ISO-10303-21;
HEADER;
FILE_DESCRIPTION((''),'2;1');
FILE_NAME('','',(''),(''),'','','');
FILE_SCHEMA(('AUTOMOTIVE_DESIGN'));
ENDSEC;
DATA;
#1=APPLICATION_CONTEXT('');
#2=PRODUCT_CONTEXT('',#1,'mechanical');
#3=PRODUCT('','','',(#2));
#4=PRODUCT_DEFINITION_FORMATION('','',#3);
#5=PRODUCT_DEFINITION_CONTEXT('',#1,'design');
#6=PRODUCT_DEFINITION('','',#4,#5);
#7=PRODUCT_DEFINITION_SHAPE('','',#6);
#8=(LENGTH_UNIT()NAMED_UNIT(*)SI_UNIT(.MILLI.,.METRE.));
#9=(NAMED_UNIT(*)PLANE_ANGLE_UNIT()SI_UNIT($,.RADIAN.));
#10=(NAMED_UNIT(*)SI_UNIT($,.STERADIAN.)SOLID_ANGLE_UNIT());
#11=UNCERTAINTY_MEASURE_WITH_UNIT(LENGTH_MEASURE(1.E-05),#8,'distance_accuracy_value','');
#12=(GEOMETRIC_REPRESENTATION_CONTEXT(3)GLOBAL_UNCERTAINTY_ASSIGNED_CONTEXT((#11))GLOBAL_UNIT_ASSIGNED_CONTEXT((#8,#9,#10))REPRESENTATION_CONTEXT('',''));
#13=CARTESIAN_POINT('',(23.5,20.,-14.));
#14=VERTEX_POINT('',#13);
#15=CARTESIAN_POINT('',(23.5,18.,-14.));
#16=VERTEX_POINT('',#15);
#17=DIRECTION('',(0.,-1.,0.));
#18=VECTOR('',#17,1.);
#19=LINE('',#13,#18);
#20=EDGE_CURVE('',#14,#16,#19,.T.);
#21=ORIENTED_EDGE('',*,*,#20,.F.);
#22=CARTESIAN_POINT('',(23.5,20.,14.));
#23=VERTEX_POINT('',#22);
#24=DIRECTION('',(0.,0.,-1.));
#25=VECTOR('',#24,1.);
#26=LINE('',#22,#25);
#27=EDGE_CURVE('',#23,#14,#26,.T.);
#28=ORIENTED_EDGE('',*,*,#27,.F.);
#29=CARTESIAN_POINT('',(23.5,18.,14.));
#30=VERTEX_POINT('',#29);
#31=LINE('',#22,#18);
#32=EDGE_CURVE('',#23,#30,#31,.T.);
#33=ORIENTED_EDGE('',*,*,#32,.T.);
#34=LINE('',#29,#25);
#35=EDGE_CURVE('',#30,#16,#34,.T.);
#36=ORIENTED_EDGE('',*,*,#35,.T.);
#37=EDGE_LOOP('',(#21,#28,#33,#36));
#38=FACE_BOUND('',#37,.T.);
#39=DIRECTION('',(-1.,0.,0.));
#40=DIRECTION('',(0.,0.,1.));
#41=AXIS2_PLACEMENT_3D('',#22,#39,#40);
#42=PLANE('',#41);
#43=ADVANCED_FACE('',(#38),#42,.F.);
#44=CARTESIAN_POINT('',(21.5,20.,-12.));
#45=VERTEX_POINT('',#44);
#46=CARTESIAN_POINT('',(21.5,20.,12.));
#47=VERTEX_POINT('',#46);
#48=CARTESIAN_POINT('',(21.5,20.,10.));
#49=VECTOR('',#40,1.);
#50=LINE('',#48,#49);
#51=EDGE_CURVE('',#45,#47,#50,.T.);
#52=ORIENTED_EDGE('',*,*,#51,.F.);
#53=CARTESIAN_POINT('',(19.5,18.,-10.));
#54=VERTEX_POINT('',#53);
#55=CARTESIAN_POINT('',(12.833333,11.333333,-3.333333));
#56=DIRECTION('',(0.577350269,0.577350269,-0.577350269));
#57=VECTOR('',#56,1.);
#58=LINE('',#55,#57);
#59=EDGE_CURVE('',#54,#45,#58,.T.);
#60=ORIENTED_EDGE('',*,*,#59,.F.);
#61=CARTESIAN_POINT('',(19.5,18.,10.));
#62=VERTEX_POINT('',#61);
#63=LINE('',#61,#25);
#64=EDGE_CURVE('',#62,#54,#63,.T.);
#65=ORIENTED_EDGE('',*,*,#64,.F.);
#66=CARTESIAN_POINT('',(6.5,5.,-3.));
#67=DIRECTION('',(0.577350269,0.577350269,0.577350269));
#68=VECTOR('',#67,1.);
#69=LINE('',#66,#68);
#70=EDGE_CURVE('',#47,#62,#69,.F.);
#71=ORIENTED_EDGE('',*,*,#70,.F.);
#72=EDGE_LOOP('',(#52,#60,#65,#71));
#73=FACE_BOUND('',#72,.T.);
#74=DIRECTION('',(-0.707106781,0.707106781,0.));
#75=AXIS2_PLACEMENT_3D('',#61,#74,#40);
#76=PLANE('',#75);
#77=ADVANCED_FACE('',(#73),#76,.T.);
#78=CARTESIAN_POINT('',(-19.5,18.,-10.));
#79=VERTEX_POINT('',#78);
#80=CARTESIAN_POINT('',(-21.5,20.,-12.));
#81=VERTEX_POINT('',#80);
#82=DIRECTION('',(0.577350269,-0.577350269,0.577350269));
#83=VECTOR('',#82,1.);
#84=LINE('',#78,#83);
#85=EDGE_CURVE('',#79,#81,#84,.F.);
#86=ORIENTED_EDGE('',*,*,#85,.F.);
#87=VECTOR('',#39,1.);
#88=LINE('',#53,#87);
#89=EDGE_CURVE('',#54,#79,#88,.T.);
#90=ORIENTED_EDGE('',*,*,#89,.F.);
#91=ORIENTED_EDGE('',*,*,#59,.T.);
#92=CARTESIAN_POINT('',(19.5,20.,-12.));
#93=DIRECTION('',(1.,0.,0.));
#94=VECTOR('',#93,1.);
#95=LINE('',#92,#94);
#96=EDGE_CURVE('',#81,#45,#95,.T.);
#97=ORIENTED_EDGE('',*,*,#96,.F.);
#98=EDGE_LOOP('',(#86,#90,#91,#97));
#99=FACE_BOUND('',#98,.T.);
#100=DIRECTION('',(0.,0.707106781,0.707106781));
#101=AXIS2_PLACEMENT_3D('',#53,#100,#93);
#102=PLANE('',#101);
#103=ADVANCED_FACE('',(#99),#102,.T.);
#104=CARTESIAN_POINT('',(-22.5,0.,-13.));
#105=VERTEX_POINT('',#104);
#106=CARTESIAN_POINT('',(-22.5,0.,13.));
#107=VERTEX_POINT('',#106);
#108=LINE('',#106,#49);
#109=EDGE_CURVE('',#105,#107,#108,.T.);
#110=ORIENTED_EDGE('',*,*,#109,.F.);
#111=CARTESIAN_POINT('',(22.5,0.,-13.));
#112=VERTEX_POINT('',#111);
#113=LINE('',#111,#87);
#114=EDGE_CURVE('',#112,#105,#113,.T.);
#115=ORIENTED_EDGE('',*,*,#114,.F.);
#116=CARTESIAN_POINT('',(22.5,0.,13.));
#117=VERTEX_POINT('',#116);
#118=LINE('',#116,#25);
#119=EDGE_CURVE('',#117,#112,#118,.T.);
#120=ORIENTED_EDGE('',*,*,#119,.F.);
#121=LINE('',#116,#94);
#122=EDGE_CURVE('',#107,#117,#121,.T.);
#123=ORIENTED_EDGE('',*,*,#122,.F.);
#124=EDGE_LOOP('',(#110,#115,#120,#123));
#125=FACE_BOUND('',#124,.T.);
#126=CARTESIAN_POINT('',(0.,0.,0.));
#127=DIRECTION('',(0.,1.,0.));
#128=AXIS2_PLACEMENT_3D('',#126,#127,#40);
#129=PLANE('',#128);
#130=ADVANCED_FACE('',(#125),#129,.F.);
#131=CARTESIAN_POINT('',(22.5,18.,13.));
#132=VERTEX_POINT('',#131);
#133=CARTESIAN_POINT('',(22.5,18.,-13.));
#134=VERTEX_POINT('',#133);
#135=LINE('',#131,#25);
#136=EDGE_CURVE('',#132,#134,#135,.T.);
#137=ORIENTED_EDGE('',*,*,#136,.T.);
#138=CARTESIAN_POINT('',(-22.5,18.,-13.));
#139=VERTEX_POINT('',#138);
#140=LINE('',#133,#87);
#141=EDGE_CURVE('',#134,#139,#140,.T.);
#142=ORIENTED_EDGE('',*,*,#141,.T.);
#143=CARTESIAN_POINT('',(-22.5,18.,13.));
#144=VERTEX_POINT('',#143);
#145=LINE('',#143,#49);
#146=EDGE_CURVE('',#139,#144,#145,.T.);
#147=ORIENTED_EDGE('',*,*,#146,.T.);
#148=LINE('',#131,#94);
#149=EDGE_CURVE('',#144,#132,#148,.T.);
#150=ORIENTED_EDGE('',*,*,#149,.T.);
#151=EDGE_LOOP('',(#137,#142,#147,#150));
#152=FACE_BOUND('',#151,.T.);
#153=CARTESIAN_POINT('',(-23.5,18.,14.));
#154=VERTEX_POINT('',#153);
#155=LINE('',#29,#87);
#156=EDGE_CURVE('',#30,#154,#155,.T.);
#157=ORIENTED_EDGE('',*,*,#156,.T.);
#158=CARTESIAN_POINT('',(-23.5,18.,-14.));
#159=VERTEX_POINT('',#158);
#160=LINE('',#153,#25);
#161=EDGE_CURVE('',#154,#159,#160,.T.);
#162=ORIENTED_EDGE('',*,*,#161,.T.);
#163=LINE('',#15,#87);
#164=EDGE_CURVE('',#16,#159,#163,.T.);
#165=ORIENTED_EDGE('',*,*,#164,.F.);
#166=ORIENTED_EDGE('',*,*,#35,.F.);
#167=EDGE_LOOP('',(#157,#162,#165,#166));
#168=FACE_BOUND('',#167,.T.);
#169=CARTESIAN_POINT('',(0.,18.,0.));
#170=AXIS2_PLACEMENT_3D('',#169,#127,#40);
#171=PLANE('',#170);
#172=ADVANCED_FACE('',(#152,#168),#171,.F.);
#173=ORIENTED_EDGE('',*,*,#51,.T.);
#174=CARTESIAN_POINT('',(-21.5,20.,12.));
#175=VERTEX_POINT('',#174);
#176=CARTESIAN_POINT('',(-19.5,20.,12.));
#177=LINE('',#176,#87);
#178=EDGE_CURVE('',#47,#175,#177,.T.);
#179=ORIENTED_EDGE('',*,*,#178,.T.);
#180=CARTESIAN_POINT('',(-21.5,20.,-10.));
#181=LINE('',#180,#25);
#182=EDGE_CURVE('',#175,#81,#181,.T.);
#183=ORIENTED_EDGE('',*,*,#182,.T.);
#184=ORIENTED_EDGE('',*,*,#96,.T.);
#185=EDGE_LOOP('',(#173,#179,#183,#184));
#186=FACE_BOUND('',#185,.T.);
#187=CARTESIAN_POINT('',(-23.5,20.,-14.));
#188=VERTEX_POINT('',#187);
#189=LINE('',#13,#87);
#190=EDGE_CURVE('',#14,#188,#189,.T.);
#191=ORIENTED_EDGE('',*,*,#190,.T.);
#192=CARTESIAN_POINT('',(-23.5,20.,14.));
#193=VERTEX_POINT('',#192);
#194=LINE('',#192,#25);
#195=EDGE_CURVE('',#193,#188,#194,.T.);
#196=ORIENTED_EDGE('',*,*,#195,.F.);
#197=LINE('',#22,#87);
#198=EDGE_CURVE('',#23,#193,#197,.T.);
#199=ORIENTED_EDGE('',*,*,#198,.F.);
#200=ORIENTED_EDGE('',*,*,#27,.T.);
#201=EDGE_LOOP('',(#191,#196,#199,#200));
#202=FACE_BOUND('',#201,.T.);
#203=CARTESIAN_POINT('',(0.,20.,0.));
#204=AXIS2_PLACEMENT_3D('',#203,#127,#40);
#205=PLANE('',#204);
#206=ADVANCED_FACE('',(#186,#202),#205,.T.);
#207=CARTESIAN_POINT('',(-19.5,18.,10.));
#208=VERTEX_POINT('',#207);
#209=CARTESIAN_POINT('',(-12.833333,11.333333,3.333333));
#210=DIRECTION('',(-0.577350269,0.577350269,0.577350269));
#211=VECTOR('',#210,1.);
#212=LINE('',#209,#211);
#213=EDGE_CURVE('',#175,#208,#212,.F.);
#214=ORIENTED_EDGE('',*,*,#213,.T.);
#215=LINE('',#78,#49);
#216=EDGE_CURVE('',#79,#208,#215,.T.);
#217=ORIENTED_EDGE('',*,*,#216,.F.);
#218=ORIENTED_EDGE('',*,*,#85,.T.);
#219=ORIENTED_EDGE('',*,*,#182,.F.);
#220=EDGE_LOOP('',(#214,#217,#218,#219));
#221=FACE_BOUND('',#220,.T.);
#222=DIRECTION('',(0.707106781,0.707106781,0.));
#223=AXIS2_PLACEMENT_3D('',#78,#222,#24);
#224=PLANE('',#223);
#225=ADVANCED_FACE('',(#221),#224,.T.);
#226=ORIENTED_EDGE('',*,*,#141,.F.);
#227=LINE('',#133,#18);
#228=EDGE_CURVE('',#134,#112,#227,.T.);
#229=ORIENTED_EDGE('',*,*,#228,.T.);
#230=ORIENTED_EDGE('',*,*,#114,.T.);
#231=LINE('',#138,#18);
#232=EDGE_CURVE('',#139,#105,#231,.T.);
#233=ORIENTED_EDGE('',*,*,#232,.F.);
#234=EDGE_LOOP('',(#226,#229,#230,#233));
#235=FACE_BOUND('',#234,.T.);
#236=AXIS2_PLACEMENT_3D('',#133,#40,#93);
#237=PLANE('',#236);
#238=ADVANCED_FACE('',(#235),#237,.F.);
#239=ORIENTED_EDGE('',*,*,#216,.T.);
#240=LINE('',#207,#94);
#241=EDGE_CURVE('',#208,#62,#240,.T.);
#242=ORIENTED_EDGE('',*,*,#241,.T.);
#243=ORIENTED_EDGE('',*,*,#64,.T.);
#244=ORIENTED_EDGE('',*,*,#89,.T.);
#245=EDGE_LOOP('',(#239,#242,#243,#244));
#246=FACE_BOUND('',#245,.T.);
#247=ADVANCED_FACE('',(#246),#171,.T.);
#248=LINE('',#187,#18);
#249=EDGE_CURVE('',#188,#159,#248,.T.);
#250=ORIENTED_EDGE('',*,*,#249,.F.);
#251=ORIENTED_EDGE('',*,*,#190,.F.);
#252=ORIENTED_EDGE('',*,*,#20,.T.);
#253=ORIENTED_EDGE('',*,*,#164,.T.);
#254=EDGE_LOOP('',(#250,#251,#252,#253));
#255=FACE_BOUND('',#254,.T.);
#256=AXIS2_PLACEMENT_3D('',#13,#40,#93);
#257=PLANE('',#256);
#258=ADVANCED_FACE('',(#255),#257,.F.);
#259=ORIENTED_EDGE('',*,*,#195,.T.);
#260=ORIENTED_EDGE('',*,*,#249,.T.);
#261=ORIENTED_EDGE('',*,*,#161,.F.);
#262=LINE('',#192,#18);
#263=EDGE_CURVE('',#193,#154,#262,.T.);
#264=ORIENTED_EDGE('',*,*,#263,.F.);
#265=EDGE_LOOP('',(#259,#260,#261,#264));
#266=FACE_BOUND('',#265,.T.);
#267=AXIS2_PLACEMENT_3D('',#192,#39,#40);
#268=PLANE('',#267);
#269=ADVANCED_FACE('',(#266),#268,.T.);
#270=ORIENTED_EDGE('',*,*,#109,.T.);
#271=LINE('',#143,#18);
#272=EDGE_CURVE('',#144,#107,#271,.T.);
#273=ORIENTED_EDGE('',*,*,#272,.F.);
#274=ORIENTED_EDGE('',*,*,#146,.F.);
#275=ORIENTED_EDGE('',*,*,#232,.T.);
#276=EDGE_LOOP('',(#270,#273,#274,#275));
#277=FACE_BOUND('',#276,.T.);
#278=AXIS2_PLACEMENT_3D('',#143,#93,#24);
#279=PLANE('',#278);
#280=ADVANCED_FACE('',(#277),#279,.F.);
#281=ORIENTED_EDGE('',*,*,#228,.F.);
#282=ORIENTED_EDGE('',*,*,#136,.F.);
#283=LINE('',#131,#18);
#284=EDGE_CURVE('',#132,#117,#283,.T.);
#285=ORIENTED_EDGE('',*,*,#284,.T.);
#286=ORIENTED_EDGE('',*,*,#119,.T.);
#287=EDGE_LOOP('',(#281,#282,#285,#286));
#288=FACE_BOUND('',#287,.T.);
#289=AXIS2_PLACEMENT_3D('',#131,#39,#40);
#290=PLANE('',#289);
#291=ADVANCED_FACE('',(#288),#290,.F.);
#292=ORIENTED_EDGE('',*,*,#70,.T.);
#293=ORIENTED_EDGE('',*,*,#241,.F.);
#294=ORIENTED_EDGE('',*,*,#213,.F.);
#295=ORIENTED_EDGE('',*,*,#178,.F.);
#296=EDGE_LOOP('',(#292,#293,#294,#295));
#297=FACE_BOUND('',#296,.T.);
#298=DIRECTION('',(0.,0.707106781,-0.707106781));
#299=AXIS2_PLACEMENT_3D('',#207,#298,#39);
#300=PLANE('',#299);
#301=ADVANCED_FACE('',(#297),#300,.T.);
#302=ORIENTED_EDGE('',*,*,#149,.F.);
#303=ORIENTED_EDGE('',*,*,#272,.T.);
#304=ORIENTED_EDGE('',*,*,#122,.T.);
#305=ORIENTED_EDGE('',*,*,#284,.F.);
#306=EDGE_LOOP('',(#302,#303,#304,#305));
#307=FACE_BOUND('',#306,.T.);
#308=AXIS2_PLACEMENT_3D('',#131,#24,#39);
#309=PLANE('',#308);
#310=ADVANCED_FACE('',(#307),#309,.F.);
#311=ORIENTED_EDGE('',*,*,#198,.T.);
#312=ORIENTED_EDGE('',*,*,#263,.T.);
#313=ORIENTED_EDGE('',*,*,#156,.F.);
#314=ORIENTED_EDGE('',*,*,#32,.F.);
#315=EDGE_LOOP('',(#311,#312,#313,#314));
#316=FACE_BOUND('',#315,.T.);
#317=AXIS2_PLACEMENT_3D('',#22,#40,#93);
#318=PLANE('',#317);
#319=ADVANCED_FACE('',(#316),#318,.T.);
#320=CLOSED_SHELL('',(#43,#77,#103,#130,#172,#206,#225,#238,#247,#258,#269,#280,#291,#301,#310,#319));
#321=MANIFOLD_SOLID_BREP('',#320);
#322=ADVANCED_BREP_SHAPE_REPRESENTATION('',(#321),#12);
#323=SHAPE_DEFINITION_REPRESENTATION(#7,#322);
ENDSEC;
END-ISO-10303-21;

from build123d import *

# Parameters (mm, degrees)
SKETCH_1_W          = 45
SKETCH_1_H          = 26
EXTRUDE_1_DEPTH     = 18
SKETCH_2_W          = 47
SKETCH_2_H          = 28
EXTRUDE_2_DEPTH     = 2
SKETCH_3_W          = 39
SKETCH_3_H          = 20
CUT_EXTRUDE_2_DEPTH = 2
CHAMFER_1_SIZE      = 2


with BuildPart() as part:
    # 草图1 → 凸台-拉伸1 (new body)
    with BuildSketch(Plane(origin=(0, 0, 0), x_dir=(1, 0, 0), z_dir=(0, 1, 0))):
        Rectangle(SKETCH_1_W, SKETCH_1_H)
    extrude(amount=EXTRUDE_1_DEPTH)

    # 草图2 → 凸台-拉伸2 (add)
    with BuildSketch(Plane(origin=(0, 18, 0), x_dir=(1, 0, 0), z_dir=(0, 1, 0))):
        Rectangle(SKETCH_2_W, SKETCH_2_H)
    extrude(amount=EXTRUDE_2_DEPTH)

    # 草图3 → 切除-拉伸2 (cut)
    with BuildSketch(Plane(origin=(0, 20, 0), x_dir=(1, 0, 0), z_dir=(0, 1, 0))):
        Rectangle(SKETCH_3_W, SKETCH_3_H)
    extrude(amount=-CUT_EXTRUDE_2_DEPTH, mode=Mode.SUBTRACT)

    # 倒角1
    chamfer_1_edges = [part.edges().sort_by_distance(p)[0] for p in [
        (-19.5, 20, 0),
        (0, 20, 10),
        (19.5, 20, 0),
        (0, 20, -10),
    ]]
    chamfer(chamfer_1_edges, length=CHAMFER_1_SIZE - 0.0001)  # a hair under: the kernel refuses the full size


solid = part.part
